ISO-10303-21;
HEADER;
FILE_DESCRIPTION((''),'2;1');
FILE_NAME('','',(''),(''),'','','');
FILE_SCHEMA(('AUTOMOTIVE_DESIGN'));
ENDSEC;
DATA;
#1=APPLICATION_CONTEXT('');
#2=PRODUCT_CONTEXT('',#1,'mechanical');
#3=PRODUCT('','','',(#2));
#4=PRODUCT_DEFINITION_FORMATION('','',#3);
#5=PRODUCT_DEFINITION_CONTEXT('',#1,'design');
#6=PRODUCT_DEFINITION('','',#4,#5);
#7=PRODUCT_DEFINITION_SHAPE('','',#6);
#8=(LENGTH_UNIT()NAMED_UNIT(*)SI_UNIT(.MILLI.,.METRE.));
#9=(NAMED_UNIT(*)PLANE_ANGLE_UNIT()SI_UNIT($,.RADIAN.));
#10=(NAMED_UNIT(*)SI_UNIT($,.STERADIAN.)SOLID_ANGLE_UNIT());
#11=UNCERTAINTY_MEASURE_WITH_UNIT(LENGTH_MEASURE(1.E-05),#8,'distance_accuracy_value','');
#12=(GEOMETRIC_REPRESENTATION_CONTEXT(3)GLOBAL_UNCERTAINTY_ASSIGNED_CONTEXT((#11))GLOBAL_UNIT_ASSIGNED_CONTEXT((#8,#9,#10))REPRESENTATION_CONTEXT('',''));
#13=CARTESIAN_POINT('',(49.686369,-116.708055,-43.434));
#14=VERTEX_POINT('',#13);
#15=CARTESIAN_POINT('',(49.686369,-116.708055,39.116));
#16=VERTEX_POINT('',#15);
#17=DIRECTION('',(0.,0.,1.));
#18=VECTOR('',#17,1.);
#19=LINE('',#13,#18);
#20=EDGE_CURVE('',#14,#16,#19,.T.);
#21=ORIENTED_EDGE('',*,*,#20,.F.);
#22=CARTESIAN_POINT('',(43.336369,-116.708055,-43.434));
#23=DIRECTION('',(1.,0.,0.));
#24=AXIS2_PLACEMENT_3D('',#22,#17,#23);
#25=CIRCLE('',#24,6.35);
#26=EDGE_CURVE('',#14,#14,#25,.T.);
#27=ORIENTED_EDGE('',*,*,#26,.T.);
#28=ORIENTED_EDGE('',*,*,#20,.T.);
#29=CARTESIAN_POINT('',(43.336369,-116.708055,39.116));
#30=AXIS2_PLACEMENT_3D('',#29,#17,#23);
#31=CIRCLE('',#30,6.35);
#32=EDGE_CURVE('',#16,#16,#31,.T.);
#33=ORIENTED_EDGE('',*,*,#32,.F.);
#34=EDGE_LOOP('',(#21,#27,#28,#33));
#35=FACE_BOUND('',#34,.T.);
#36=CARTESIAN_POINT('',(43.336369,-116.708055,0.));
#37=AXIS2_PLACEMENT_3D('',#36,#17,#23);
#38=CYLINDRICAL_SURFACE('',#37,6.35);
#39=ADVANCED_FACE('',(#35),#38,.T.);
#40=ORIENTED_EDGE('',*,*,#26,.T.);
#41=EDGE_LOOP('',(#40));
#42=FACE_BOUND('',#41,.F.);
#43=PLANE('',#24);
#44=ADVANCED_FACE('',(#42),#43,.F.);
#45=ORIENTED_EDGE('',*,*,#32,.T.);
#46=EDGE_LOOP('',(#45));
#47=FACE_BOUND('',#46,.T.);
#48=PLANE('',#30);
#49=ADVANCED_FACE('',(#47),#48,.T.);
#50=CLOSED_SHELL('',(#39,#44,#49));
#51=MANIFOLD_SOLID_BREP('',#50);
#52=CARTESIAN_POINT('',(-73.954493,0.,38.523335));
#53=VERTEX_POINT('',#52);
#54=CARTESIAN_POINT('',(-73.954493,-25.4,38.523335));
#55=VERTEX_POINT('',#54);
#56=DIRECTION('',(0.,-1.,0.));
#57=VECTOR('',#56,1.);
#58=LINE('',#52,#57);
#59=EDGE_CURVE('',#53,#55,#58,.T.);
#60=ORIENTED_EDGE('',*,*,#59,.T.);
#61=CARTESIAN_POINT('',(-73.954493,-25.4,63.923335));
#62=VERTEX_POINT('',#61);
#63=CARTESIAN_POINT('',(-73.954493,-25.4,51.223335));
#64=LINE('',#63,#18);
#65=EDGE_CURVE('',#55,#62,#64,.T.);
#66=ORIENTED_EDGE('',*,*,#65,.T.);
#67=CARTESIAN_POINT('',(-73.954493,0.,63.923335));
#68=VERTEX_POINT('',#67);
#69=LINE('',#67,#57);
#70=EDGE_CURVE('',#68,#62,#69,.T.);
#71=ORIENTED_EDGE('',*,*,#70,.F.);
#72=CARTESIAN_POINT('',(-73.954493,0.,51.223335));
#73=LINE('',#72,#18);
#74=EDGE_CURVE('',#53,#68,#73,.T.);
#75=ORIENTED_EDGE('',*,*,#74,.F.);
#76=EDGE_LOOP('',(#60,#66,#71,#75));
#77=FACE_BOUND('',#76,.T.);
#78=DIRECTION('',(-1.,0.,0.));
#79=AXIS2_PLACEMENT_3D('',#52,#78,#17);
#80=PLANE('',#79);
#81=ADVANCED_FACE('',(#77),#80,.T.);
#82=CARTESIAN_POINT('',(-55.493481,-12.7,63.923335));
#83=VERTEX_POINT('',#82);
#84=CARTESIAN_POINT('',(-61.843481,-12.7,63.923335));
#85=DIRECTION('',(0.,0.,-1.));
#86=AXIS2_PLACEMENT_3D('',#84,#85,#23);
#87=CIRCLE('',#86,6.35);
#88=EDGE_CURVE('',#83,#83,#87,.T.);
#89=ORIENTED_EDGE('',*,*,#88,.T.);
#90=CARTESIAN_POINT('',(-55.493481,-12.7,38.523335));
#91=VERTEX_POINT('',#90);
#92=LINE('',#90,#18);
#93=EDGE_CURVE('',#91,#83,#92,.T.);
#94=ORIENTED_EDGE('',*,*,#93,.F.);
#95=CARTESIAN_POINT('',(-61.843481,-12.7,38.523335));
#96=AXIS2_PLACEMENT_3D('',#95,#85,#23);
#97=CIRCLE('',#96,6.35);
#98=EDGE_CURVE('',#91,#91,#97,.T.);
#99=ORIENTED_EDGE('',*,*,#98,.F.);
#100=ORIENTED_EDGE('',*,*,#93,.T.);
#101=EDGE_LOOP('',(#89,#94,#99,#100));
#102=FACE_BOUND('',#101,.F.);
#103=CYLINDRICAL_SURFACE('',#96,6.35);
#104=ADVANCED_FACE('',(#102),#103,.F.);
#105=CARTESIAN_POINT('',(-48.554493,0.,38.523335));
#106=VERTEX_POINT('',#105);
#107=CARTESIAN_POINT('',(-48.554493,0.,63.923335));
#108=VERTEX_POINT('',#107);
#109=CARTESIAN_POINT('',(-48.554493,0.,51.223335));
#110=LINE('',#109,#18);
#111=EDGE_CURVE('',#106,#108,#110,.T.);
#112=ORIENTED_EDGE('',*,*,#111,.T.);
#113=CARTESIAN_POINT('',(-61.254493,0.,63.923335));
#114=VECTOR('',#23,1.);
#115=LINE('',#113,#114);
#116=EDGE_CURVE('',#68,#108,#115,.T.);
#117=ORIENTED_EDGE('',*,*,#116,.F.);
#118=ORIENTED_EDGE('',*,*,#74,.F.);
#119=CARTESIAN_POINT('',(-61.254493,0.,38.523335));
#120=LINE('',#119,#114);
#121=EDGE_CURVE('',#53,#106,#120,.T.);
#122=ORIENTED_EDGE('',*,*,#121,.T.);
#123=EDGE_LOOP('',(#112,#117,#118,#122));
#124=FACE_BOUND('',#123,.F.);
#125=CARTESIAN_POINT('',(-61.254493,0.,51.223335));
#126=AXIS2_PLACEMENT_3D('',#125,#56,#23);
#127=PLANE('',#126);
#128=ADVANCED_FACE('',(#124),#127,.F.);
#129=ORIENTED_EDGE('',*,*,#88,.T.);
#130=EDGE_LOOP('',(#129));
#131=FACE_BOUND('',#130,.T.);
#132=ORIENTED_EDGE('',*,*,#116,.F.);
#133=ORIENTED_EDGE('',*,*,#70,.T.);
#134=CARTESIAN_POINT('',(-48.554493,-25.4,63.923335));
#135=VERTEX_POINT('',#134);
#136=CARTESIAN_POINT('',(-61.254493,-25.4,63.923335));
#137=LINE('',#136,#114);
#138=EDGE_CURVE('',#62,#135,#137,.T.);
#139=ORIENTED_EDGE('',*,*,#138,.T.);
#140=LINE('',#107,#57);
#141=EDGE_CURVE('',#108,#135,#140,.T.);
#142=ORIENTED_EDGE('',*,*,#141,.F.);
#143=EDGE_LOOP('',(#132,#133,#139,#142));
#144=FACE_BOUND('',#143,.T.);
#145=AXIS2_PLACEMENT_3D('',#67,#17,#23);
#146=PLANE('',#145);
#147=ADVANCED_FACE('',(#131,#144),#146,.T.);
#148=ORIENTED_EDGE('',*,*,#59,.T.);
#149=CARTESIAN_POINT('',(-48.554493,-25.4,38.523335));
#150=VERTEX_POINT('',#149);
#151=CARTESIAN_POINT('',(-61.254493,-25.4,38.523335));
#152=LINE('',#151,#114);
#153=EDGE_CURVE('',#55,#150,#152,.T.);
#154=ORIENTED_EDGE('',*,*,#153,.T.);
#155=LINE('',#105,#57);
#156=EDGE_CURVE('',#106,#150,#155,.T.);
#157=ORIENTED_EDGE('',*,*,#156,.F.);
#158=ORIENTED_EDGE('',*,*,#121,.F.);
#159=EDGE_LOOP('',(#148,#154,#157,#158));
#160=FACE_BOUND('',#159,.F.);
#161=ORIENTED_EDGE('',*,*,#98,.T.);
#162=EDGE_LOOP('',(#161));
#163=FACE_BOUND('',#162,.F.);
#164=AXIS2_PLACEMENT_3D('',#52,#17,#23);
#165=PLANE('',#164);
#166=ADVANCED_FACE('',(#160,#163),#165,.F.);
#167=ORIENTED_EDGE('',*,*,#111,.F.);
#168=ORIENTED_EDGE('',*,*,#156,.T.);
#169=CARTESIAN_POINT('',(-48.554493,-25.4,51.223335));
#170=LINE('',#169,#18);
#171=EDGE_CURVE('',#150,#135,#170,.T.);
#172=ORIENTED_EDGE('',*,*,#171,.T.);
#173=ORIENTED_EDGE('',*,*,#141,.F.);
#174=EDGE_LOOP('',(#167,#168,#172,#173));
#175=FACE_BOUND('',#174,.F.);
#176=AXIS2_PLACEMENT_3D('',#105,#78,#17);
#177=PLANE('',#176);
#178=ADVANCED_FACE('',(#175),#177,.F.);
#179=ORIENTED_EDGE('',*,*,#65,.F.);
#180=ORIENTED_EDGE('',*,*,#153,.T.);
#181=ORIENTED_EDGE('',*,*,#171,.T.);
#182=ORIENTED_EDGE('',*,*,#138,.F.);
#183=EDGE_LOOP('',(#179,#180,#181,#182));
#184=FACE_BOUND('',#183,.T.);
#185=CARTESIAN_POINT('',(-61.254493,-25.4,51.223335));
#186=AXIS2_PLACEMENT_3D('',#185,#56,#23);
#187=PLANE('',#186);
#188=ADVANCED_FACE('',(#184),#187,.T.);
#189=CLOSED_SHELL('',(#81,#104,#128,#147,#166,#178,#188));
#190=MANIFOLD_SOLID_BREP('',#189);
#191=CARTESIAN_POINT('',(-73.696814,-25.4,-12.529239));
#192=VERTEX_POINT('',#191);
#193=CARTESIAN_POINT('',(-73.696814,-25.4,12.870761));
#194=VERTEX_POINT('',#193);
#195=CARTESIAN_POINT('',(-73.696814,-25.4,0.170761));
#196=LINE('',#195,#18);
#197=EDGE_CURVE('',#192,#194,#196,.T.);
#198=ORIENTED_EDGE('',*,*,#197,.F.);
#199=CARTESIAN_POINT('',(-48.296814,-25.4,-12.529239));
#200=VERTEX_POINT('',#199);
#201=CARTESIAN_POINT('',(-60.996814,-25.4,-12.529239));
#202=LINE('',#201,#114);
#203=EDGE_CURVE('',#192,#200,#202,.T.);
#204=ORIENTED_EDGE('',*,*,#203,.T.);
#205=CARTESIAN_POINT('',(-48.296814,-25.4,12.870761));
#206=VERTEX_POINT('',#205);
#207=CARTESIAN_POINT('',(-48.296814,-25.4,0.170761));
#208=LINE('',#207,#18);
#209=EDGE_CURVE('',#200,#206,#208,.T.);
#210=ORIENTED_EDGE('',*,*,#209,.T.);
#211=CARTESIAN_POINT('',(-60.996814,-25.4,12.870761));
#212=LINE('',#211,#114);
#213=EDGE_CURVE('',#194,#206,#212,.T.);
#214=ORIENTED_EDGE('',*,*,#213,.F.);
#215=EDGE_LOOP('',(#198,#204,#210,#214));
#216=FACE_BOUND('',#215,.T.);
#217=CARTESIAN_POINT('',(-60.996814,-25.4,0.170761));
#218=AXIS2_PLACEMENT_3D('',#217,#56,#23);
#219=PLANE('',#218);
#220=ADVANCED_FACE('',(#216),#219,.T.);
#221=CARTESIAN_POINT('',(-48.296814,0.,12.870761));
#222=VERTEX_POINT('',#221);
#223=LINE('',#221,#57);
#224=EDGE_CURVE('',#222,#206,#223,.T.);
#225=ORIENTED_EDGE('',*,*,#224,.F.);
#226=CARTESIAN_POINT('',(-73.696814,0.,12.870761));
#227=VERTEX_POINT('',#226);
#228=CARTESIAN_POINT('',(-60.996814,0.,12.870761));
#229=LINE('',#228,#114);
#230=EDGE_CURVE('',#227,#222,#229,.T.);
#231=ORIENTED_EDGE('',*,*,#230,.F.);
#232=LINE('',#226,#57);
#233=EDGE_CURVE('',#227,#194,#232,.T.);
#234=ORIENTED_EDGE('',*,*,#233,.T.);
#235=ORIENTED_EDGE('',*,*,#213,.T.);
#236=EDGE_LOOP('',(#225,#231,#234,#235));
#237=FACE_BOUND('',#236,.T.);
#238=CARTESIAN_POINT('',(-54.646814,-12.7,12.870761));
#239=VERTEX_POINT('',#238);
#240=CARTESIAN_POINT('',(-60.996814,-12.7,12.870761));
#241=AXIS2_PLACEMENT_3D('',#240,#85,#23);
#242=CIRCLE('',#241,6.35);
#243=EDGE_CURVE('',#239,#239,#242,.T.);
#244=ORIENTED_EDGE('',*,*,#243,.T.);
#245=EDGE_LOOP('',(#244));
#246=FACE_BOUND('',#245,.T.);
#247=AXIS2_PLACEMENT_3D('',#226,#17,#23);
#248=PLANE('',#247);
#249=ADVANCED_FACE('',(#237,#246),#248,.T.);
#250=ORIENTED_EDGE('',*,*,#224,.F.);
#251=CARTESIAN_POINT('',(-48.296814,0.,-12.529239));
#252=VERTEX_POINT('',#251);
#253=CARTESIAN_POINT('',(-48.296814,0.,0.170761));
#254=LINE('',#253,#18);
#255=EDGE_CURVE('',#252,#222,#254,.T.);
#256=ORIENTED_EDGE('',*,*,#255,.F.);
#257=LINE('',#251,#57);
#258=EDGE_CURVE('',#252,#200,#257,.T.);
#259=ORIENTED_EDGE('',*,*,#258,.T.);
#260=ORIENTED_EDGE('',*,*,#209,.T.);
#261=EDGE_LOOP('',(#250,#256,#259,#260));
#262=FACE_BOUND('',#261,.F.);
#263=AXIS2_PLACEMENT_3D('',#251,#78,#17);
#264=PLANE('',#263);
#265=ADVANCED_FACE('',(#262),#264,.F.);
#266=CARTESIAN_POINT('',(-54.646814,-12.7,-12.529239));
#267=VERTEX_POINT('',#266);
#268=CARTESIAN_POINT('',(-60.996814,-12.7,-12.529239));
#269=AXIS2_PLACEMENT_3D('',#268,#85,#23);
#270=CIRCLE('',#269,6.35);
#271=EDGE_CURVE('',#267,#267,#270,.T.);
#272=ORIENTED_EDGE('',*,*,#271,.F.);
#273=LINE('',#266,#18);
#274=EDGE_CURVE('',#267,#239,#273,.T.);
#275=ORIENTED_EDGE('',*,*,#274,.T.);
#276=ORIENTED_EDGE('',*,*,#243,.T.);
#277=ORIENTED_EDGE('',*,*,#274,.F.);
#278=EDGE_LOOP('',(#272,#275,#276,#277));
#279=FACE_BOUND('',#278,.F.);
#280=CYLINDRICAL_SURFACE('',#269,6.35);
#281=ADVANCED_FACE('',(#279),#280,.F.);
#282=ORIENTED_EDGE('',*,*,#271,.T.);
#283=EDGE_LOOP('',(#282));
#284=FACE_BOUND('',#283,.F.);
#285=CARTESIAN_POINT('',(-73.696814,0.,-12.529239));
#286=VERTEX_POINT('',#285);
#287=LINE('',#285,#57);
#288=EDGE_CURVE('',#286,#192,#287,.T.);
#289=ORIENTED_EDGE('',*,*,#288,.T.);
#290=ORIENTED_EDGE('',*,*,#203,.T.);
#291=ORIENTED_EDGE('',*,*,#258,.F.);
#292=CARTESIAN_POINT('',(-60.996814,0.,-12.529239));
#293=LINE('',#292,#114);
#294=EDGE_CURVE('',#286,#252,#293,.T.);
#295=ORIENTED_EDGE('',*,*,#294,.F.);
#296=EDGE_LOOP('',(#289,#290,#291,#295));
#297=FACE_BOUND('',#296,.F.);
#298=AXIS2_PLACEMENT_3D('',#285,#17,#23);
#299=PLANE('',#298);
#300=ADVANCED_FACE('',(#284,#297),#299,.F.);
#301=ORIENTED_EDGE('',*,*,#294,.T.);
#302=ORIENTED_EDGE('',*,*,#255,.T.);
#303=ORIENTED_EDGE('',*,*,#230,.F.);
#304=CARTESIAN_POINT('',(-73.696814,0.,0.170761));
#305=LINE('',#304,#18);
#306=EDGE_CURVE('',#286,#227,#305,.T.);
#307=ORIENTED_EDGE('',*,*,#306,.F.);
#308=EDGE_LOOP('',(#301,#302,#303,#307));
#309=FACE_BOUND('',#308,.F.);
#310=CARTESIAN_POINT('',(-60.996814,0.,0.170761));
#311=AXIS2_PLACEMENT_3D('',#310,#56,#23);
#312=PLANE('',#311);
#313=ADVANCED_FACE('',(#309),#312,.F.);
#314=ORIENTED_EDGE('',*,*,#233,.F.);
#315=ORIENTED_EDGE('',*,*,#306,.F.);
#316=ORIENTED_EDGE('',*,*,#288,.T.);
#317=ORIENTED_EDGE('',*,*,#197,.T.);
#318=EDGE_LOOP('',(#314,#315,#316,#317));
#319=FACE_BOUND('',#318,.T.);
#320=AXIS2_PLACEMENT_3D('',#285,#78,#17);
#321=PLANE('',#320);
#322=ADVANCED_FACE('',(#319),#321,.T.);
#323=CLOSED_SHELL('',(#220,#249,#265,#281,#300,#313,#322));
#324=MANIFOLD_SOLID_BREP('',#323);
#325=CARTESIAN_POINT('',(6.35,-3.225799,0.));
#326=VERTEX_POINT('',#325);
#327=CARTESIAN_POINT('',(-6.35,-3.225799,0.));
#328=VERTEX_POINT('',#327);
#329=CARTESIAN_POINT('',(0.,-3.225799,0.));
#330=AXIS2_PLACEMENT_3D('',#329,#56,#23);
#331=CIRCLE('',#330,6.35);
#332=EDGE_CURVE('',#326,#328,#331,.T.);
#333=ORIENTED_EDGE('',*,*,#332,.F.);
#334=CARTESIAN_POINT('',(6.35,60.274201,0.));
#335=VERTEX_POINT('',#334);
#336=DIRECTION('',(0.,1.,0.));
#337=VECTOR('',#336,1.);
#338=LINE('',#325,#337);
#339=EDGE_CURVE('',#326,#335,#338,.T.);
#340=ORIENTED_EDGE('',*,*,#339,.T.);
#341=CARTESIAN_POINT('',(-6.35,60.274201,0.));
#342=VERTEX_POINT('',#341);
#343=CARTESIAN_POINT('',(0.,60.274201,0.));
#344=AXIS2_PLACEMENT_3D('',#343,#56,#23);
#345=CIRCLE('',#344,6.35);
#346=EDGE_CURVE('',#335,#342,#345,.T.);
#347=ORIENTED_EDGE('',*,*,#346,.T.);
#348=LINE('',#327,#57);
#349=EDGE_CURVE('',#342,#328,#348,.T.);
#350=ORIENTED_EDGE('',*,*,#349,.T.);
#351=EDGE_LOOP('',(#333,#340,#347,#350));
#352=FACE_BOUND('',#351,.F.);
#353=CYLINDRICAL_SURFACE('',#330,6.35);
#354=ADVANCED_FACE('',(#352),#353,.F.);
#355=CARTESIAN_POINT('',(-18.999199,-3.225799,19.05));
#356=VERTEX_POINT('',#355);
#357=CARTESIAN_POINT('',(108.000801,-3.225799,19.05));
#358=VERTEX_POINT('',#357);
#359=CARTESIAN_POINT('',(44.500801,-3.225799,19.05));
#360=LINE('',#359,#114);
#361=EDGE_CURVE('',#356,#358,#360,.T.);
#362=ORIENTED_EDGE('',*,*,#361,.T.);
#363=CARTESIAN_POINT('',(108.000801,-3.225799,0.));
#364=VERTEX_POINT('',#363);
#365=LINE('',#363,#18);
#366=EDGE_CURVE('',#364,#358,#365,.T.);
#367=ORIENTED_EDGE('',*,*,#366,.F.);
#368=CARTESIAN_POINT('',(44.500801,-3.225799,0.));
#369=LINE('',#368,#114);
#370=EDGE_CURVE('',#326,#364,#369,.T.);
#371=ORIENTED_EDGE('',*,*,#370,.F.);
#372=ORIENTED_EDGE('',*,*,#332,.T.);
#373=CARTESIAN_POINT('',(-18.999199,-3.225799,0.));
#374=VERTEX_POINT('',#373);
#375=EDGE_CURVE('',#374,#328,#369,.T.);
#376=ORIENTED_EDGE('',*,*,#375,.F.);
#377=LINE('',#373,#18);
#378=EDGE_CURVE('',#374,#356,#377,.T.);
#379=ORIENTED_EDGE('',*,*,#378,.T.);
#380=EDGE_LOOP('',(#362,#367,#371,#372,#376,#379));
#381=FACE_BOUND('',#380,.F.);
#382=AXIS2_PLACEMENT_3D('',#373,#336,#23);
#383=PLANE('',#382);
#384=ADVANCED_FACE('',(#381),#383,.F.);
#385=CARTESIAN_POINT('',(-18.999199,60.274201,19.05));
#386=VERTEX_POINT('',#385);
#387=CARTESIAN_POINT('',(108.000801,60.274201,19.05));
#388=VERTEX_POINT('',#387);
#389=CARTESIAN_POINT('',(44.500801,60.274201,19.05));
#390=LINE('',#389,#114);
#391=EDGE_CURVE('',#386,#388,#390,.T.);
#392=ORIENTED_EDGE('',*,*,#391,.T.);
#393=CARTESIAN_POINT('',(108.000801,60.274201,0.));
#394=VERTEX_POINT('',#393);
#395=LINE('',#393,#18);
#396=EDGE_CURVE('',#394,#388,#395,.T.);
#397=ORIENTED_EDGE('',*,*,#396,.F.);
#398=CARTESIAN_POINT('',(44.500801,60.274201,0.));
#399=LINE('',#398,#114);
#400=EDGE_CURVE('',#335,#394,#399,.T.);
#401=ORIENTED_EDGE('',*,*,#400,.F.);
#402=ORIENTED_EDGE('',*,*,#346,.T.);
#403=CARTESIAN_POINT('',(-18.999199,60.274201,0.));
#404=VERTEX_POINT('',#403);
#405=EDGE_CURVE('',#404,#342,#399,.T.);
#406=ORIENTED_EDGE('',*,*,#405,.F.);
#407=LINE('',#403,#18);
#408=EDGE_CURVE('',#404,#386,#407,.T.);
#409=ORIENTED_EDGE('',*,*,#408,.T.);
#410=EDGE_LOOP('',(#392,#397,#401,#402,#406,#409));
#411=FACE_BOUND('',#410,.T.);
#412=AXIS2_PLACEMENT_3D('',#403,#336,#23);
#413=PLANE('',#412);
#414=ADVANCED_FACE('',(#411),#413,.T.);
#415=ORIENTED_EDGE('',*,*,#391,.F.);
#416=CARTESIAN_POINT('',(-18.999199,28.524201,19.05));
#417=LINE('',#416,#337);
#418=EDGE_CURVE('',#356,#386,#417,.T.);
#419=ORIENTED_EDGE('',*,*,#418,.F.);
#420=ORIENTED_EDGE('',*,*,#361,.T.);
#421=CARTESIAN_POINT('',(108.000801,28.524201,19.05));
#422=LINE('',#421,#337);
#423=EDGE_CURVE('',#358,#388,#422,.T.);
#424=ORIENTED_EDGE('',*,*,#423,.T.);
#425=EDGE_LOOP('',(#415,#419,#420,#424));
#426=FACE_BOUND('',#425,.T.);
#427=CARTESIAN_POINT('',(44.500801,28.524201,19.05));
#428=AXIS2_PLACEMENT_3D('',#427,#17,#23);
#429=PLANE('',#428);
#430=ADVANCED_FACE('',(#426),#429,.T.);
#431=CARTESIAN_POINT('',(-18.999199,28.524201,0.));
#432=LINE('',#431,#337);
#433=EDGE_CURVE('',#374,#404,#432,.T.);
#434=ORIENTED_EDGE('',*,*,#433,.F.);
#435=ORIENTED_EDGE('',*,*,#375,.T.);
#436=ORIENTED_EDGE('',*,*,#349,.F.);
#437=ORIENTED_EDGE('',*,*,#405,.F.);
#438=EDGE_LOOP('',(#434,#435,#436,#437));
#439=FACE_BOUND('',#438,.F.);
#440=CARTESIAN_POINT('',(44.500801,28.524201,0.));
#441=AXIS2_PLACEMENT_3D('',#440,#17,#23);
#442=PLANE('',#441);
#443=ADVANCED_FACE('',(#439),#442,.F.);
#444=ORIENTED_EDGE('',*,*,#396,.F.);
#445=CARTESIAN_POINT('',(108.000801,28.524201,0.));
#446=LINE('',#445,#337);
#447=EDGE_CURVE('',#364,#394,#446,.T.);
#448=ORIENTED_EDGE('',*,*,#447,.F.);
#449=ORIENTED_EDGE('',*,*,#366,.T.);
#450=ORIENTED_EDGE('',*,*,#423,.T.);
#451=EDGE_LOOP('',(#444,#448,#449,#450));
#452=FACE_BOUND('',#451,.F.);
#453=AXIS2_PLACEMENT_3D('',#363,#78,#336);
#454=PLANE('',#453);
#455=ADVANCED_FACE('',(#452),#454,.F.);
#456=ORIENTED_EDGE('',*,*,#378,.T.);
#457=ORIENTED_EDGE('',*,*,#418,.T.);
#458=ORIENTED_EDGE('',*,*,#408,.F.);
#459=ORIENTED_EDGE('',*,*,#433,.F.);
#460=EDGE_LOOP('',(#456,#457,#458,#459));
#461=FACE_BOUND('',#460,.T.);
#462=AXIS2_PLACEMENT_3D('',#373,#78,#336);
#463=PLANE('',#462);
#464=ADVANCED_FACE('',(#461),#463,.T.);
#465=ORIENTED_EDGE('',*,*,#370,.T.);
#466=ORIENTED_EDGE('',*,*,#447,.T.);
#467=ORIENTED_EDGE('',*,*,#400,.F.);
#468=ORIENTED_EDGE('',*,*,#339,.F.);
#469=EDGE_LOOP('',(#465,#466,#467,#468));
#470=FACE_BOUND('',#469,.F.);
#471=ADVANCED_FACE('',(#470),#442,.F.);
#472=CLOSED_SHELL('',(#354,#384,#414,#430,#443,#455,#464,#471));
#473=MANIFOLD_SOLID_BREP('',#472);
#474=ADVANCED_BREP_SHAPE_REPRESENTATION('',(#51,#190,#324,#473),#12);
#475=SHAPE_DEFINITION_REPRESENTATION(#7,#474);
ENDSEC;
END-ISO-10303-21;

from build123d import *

# Parameters (mm, degrees)
F1_W      = 127
F1_H      = 63.5
F2_DEPTH  = 19.05
F3_R      = 6.35
F4_DEPTH  = 88.392
F0_R      = 6.35
F5_DEPTH  = 39.116
F6_DEPTH  = 43.434
F7_W      = 25.4
F7_H      = 25.4
F8_DEPTH  = 25.4
F10_DEPTH = 25.4
F11_R     = 6.35
F12_DEPTH = 47.244
F9_R      = 6.35
F13_DEPTH = 46.99


# Not quite as in the source:
# - a feature names something its author has since deleted; it is built from what else it names


with BuildPart() as f2:
    # F1 (on Top) → F2 (new body)
    with BuildSketch(Plane.XY):
        with Locations((44.5008012414, 28.5242010134)):
            Rectangle(F1_W, F1_H)
    extrude(amount=F2_DEPTH)

    # F3 (on face) → F4 (cut)
    with BuildSketch(Plane.XZ.offset(3.2257989866)):
        Circle(F3_R)
    extrude(amount=-F4_DEPTH, mode=Mode.SUBTRACT)


with BuildPart() as f5:
    # F0 (on Top) → F5 (new body)
    with BuildSketch(Plane.XY):
        with Locations((43.3363690972, -116.7080551386)):
            Circle(F0_R)
    extrude(amount=F5_DEPTH)

    # F6 (add): a face of the model
    f6_faces = [f5.faces().sort_by_distance(p)[0] for p in [
        (43.3363690972, -116.7080551386, 0),
    ]]
    extrude(f6_faces, amount=F6_DEPTH)


with BuildPart() as f8:
    # F7 (on Front) → F8 (new body)
    with BuildSketch(Plane.XZ):
        with Locations((-61.2544928074, 51.2233350098)):
            Rectangle(F7_W, F7_H)
    extrude(amount=F8_DEPTH)

    # F9 (on face) → F13 (cut)
    with BuildSketch(Plane(origin=(0, 0, 38.5233350098), x_dir=(1, 0, 0), z_dir=(0, 0, -1))):
        with Locations((-61.8434809148, 12.7)):
            Circle(F9_R)
    extrude(amount=-F13_DEPTH, mode=Mode.SUBTRACT)


with BuildPart() as f10:
    # F7 (on Front) → F10 (new body)
    with BuildSketch(Plane.XZ):
        with Locations((-60.9968144774, 0.1707609415)):
            Rectangle(F7_W, F7_H)
    extrude(amount=F10_DEPTH)

    # F11 (on face) → F12 (cut)
    with BuildSketch(Plane(origin=(0, 0, -12.5292390585), x_dir=(1, 0, 0), z_dir=(0, 0, -1))):
        with Locations((-60.9968144774, 12.7)):
            Circle(F11_R)
    extrude(amount=-F12_DEPTH, mode=Mode.SUBTRACT)


solid = Compound([f2.part, f5.part, f8.part, f10.part])
